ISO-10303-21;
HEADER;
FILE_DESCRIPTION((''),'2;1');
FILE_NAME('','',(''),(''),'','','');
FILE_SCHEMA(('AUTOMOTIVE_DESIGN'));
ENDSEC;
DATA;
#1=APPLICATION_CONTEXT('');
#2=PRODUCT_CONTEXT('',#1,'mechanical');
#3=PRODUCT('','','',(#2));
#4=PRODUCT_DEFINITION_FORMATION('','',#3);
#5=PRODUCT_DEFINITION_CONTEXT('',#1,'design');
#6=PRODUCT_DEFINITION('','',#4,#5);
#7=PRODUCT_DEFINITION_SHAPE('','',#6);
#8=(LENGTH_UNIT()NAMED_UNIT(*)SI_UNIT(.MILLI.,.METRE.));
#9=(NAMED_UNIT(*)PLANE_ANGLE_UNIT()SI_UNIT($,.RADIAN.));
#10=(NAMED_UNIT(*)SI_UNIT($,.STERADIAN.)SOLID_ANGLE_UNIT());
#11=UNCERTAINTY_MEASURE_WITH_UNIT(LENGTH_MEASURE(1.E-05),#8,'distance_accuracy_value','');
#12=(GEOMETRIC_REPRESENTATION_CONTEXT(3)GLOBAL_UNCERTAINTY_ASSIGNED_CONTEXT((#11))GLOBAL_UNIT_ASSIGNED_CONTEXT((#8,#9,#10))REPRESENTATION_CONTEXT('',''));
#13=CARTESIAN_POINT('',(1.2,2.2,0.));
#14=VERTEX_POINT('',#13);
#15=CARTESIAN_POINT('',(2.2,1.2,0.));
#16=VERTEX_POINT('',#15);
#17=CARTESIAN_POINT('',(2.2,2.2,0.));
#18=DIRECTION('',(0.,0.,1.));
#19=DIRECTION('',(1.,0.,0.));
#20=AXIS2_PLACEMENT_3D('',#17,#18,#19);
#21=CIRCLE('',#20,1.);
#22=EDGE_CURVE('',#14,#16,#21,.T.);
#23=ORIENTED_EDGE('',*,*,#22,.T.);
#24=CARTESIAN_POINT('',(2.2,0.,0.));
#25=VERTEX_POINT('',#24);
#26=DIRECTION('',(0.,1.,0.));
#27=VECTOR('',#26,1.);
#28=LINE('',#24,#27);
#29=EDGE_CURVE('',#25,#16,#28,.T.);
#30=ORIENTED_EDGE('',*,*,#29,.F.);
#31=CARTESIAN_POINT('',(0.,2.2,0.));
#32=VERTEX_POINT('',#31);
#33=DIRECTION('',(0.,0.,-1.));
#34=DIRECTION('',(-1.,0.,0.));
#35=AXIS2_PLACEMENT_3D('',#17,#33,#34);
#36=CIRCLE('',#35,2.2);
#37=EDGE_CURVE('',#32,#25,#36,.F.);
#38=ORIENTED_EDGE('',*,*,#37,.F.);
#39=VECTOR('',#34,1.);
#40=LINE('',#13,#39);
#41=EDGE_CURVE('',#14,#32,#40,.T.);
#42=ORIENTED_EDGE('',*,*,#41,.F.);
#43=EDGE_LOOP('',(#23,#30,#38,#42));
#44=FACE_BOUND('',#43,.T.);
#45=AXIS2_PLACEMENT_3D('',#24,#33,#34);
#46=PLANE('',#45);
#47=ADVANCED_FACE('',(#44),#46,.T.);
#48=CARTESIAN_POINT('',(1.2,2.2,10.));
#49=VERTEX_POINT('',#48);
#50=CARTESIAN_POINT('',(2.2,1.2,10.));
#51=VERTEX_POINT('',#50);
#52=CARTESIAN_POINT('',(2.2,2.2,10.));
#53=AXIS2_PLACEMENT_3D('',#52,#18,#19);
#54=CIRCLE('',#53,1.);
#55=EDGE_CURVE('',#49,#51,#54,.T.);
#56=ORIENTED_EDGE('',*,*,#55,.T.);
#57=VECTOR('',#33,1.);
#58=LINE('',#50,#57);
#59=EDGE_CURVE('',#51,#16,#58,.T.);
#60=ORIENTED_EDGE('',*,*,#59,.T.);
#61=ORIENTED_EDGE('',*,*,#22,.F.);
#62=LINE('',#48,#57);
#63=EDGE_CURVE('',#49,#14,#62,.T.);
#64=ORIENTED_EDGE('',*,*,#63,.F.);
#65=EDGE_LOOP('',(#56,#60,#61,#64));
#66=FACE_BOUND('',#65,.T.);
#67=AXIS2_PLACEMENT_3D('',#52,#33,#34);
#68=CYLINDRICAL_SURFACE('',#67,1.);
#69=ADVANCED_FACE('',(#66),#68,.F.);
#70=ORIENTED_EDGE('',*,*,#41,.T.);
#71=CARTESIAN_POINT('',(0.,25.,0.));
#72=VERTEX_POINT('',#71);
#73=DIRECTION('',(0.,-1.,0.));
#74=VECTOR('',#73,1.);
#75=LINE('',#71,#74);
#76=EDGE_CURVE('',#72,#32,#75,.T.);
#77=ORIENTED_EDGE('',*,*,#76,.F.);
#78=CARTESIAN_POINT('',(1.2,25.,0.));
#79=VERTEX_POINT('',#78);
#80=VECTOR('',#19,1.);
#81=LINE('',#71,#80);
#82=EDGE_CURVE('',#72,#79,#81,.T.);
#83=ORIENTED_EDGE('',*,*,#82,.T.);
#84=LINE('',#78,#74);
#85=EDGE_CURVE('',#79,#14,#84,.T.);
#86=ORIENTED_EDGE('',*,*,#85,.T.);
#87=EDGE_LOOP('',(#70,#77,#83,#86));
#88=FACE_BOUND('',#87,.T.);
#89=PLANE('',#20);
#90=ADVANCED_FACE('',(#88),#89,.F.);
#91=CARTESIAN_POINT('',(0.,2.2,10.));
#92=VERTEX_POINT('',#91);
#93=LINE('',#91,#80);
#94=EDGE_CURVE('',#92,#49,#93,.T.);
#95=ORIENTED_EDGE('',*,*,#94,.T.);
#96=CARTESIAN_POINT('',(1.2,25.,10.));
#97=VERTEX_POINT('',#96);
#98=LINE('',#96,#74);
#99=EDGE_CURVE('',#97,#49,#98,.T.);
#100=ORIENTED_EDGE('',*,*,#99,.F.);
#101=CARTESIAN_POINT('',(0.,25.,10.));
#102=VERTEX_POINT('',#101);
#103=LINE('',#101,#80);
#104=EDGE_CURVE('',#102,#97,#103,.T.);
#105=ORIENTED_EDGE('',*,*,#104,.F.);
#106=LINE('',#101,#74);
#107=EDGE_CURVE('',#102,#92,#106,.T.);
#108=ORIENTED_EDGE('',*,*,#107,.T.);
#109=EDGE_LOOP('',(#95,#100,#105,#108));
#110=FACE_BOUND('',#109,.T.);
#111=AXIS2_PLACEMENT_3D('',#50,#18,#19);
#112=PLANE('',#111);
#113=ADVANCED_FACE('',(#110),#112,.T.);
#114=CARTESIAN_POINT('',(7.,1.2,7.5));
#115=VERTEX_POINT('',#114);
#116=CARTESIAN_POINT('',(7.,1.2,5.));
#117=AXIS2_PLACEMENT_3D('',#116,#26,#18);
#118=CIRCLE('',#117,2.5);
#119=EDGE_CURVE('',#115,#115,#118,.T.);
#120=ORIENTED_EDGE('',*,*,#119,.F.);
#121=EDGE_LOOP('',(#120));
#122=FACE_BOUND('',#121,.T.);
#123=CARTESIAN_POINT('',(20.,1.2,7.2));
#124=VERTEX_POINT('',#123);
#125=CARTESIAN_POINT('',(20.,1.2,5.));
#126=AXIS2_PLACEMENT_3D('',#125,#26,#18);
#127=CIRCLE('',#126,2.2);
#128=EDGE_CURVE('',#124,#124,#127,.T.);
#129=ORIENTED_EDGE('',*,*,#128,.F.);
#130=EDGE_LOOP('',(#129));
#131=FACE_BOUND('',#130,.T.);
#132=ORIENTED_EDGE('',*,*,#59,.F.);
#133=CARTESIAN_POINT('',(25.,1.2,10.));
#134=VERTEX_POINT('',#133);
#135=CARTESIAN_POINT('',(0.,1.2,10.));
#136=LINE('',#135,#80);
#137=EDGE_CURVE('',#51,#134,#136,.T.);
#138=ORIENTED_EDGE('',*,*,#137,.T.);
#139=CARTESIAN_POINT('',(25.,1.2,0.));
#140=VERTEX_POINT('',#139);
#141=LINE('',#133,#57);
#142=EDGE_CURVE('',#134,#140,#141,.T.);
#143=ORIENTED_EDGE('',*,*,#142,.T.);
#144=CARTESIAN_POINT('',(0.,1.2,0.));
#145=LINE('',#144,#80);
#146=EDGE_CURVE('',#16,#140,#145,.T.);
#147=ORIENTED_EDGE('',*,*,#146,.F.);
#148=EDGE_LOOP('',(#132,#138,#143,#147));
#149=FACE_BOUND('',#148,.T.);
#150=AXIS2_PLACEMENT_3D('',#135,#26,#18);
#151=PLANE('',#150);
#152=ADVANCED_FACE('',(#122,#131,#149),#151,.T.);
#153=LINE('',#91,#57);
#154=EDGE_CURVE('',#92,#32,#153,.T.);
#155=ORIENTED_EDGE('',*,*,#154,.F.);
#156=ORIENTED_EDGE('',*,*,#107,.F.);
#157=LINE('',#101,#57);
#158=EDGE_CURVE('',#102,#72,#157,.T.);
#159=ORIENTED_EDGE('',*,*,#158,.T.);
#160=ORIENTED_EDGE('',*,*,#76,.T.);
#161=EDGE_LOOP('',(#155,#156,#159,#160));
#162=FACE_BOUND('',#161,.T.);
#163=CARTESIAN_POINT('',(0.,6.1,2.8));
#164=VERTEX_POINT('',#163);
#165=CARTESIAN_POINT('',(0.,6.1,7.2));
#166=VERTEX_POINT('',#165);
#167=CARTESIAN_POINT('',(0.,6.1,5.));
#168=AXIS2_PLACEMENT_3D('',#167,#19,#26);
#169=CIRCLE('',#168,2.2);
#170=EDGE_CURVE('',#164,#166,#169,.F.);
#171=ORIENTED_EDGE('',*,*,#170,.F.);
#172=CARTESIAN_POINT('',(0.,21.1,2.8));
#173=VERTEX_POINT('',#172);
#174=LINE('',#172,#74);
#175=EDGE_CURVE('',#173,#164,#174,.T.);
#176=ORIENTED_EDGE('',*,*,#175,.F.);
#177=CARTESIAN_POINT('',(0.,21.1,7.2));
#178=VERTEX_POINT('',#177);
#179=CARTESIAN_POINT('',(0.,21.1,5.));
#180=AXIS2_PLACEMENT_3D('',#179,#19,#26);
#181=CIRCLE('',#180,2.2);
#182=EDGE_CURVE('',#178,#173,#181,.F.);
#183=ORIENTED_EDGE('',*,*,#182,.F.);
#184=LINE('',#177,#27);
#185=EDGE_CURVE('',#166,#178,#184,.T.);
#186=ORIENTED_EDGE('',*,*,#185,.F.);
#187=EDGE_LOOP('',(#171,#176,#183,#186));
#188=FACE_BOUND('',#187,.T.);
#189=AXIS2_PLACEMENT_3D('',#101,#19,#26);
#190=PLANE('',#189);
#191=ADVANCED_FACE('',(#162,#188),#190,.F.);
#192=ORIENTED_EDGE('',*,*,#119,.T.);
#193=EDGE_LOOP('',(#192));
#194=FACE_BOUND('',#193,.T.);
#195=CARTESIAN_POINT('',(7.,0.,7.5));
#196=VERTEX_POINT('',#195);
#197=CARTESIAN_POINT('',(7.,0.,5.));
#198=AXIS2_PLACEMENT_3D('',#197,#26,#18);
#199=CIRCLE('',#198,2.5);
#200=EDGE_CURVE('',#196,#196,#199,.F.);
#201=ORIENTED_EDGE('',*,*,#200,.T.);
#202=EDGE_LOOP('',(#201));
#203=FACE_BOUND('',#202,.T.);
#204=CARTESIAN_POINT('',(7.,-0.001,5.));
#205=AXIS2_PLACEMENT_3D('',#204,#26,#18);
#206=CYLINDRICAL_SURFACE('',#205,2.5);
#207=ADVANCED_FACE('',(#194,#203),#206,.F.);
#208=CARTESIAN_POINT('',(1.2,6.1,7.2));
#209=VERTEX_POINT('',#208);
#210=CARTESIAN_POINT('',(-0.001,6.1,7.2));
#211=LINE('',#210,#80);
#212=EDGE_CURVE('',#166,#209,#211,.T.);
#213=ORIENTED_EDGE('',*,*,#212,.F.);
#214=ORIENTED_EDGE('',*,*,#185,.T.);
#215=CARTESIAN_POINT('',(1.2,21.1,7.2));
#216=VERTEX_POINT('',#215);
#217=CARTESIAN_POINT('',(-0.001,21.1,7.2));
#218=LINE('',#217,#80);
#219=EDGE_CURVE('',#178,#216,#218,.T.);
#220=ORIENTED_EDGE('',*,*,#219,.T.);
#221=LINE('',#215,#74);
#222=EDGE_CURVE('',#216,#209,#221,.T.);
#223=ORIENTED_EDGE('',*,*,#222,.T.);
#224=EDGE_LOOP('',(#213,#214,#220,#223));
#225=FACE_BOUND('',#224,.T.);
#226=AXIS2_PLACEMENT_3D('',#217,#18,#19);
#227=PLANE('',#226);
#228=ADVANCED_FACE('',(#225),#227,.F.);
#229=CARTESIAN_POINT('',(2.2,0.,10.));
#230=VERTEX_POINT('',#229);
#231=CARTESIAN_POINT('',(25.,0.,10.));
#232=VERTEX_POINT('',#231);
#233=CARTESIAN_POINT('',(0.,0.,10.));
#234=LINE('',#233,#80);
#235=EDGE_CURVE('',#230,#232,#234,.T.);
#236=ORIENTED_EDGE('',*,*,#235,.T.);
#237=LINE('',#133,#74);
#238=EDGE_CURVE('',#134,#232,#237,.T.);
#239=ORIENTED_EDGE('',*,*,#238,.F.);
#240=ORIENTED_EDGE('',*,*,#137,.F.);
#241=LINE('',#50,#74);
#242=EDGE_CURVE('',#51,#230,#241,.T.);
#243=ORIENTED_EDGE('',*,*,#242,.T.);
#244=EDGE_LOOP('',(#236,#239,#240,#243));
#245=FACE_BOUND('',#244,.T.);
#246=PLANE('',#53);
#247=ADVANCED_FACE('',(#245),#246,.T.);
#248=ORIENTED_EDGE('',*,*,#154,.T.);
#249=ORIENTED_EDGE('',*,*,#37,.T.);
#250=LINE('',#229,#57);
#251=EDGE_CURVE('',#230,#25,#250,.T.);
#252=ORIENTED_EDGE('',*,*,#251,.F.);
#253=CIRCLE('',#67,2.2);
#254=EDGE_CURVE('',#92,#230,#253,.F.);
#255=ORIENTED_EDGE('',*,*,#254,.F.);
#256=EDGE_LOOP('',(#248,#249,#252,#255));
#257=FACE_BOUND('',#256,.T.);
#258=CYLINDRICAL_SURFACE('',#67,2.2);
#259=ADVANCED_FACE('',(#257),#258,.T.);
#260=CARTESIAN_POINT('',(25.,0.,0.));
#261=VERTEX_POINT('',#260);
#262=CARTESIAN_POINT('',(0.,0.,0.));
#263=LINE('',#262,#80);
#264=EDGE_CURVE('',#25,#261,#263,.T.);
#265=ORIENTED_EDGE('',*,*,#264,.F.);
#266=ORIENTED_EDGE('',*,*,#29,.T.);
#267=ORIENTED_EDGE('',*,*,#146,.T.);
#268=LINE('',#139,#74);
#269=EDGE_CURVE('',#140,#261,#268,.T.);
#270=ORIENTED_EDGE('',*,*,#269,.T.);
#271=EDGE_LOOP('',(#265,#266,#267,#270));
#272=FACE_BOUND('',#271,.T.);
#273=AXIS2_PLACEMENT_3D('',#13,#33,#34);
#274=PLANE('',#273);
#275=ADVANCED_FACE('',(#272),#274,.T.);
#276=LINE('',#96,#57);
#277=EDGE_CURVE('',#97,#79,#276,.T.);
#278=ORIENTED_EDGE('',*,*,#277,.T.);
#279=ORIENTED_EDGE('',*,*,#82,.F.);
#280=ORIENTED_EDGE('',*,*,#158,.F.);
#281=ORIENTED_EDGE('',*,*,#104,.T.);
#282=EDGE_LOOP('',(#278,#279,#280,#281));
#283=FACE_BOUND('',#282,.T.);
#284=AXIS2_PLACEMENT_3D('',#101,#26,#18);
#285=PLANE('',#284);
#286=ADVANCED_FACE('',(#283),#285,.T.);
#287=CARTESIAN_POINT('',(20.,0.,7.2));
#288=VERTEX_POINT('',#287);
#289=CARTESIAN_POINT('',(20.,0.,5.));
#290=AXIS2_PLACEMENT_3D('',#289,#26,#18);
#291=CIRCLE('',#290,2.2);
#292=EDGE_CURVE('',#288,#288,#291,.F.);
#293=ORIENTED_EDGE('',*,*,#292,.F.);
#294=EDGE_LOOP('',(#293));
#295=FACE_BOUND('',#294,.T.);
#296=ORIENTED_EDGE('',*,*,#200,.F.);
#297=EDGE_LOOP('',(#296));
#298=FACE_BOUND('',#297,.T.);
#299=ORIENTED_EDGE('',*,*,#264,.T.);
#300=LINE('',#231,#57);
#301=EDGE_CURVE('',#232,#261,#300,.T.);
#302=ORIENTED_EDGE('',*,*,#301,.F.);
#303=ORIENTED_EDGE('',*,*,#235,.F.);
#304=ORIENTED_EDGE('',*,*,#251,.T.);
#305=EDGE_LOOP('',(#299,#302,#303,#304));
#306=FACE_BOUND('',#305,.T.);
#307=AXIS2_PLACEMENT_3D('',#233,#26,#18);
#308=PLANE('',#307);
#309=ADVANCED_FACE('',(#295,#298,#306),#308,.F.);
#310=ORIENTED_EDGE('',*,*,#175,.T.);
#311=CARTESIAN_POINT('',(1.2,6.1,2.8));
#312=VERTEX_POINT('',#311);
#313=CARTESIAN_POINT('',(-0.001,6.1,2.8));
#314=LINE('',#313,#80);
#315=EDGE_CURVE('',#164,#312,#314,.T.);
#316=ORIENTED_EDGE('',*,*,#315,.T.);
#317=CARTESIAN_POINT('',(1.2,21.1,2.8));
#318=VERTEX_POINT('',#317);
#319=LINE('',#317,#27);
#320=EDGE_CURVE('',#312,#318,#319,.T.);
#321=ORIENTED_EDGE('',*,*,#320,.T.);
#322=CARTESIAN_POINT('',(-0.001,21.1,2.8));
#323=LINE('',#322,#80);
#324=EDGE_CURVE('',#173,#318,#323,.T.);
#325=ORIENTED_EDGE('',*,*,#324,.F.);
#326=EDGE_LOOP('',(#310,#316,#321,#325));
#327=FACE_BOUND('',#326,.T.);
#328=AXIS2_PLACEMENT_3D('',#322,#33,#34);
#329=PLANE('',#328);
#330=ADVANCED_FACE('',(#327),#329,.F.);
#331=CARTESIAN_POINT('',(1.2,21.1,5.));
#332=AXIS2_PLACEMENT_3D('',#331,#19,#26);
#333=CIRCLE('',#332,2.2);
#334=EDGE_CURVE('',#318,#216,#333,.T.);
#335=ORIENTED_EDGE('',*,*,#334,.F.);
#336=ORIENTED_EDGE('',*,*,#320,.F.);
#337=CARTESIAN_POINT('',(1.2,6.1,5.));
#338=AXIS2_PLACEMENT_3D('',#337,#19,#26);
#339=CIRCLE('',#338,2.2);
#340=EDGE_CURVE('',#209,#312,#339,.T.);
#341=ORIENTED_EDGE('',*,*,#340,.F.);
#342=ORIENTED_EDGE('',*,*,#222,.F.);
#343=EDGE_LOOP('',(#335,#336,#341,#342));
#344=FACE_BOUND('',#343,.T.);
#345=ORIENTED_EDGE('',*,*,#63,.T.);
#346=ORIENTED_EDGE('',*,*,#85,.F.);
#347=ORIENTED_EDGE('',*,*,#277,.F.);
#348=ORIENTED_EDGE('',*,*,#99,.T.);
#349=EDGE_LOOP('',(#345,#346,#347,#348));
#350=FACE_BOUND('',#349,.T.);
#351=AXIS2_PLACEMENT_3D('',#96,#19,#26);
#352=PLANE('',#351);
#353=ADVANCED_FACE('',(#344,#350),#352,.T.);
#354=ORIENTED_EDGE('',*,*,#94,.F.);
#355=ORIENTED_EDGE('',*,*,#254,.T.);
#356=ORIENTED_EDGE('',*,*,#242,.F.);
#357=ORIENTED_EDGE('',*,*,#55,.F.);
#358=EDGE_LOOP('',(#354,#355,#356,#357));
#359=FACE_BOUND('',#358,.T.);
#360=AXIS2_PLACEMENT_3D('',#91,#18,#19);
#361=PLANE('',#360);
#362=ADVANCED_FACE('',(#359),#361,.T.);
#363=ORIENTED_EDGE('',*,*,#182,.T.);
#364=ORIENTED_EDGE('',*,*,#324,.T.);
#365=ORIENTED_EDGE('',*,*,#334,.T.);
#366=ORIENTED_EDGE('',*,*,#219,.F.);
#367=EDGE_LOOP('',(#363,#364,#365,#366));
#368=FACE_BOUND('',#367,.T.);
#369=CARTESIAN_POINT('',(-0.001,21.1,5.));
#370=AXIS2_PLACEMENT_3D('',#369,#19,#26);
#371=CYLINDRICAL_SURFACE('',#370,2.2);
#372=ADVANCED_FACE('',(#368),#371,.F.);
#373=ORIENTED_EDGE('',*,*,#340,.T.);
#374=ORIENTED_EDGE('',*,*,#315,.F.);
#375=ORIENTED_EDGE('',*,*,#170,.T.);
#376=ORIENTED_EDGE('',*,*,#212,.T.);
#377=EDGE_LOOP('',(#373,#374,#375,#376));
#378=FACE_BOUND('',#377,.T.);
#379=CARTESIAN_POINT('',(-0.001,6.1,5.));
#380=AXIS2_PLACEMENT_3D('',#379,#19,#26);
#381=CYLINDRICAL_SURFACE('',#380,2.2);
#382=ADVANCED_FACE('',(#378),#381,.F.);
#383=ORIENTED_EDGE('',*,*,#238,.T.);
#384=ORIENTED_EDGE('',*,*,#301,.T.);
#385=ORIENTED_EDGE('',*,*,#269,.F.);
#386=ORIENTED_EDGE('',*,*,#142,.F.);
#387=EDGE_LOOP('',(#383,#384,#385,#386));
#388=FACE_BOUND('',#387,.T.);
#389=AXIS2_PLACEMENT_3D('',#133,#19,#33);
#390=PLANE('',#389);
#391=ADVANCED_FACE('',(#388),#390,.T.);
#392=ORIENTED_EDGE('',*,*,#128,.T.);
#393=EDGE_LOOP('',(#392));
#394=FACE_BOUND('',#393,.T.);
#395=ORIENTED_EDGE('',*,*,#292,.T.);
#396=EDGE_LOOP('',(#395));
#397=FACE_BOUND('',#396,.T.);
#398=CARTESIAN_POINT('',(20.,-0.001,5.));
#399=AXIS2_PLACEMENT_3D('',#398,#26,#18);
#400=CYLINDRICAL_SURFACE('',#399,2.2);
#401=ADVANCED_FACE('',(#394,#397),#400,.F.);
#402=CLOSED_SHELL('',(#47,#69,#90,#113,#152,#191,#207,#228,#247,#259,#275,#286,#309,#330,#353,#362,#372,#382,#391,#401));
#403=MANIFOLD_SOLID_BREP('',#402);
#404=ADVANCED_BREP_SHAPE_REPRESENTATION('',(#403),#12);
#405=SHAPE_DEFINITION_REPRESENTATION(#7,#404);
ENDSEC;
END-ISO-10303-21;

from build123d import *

# Parameters (mm, degrees)
T_LE_DE_BASE_PLI_E1_DEPTH = 10
ENL_V_MAT_EXTRU_1_REACH   = 37.937
ESQUISSE6_R               = 2.2
ESQUISSE6_R_2             = 2.5
ENL_V_MAT_EXTRU_2_REACH   = 37.937


# Sheet-metal steps are written as plain solids
with BuildPart() as part:
    # Esquisse1 → Tôle de base pliée1 (new body)
    with BuildSketch(Plane.XY):
        with BuildLine():
            Line((0, 25), (0, 2.2))
            ThreePointArc((0, 2.2), (0.644365081, 0.644365081), (2.2, 0))
            Line((2.2, 0), (25, 0))
            Line((25, 0), (25, 1.2))
            Line((25, 1.2), (2.2, 1.2))
            ThreePointArc((2.2, 1.2), (1.492893219, 1.492893219), (1.2, 2.2))
            Line((1.2, 2.2), (1.2, 25))
            Line((1.2, 25), (0, 25))
        make_face()
    extrude(amount=T_LE_DE_BASE_PLI_E1_DEPTH)

    # Esquisse6 → Enlèv. mat.-Extru.1 (cut, up to next)
    with BuildSketch(Plane(origin=(0, 1.2, 0), x_dir=(1, 0, 0), z_dir=(0, 1, 0)), mode=Mode.PRIVATE) as enl_v_mat_extru_1_sk1:
        with Locations(Location((20, -5, 0), (0, 0, 270))):
            Circle(ESQUISSE6_R)
    enl_v_mat_extru_1_tool1 = extrude(enl_v_mat_extru_1_sk1.sketch, amount=-ENL_V_MAT_EXTRU_1_REACH, mode=Mode.PRIVATE) & part.part
    # Esquisse6 → Enlèv. mat.-Extru.1 (cut, up to next)
    with BuildSketch(Plane(origin=(0, 1.2, 0), x_dir=(1, 0, 0), z_dir=(0, 1, 0)), mode=Mode.PRIVATE) as enl_v_mat_extru_1_sk2:
        with Locations(Location((7, -5, 0), (0, 0, 270))):
            Circle(ESQUISSE6_R_2)
    enl_v_mat_extru_1_tool2 = extrude(enl_v_mat_extru_1_sk2.sketch, amount=-ENL_V_MAT_EXTRU_1_REACH, mode=Mode.PRIVATE) & part.part
    add(enl_v_mat_extru_1_tool1.solids().sort_by_distance((20, 1.2, 5))[0], mode=Mode.SUBTRACT)
    add(enl_v_mat_extru_1_tool2.solids().sort_by_distance((7, 1.2, 5))[0], mode=Mode.SUBTRACT)

    # Esquisse7 → Enlèv. mat.-Extru.2 (cut, up to next)
    with BuildSketch(Plane(origin=(1.2, 0, 0), x_dir=(0, 0, -1), z_dir=(1, 0, 0)), mode=Mode.PRIVATE) as enl_v_mat_extru_2_sk1:
        with BuildLine():
            Line((-2.8, 21.1), (-2.8, 6.1))
            ThreePointArc((-2.8, 6.1), (-5, 3.9), (-7.2, 6.1))
            Line((-7.2, 6.1), (-7.2, 21.1))
            ThreePointArc((-7.2, 21.1), (-5, 23.3), (-2.8, 21.1))
        make_face()
    enl_v_mat_extru_2_tool1 = extrude(enl_v_mat_extru_2_sk1.sketch, amount=-ENL_V_MAT_EXTRU_2_REACH, mode=Mode.PRIVATE) & part.part
    add(enl_v_mat_extru_2_tool1.solids().sort_by_distance((1.2, 13.6, 5))[0], mode=Mode.SUBTRACT)


solid = part.part
